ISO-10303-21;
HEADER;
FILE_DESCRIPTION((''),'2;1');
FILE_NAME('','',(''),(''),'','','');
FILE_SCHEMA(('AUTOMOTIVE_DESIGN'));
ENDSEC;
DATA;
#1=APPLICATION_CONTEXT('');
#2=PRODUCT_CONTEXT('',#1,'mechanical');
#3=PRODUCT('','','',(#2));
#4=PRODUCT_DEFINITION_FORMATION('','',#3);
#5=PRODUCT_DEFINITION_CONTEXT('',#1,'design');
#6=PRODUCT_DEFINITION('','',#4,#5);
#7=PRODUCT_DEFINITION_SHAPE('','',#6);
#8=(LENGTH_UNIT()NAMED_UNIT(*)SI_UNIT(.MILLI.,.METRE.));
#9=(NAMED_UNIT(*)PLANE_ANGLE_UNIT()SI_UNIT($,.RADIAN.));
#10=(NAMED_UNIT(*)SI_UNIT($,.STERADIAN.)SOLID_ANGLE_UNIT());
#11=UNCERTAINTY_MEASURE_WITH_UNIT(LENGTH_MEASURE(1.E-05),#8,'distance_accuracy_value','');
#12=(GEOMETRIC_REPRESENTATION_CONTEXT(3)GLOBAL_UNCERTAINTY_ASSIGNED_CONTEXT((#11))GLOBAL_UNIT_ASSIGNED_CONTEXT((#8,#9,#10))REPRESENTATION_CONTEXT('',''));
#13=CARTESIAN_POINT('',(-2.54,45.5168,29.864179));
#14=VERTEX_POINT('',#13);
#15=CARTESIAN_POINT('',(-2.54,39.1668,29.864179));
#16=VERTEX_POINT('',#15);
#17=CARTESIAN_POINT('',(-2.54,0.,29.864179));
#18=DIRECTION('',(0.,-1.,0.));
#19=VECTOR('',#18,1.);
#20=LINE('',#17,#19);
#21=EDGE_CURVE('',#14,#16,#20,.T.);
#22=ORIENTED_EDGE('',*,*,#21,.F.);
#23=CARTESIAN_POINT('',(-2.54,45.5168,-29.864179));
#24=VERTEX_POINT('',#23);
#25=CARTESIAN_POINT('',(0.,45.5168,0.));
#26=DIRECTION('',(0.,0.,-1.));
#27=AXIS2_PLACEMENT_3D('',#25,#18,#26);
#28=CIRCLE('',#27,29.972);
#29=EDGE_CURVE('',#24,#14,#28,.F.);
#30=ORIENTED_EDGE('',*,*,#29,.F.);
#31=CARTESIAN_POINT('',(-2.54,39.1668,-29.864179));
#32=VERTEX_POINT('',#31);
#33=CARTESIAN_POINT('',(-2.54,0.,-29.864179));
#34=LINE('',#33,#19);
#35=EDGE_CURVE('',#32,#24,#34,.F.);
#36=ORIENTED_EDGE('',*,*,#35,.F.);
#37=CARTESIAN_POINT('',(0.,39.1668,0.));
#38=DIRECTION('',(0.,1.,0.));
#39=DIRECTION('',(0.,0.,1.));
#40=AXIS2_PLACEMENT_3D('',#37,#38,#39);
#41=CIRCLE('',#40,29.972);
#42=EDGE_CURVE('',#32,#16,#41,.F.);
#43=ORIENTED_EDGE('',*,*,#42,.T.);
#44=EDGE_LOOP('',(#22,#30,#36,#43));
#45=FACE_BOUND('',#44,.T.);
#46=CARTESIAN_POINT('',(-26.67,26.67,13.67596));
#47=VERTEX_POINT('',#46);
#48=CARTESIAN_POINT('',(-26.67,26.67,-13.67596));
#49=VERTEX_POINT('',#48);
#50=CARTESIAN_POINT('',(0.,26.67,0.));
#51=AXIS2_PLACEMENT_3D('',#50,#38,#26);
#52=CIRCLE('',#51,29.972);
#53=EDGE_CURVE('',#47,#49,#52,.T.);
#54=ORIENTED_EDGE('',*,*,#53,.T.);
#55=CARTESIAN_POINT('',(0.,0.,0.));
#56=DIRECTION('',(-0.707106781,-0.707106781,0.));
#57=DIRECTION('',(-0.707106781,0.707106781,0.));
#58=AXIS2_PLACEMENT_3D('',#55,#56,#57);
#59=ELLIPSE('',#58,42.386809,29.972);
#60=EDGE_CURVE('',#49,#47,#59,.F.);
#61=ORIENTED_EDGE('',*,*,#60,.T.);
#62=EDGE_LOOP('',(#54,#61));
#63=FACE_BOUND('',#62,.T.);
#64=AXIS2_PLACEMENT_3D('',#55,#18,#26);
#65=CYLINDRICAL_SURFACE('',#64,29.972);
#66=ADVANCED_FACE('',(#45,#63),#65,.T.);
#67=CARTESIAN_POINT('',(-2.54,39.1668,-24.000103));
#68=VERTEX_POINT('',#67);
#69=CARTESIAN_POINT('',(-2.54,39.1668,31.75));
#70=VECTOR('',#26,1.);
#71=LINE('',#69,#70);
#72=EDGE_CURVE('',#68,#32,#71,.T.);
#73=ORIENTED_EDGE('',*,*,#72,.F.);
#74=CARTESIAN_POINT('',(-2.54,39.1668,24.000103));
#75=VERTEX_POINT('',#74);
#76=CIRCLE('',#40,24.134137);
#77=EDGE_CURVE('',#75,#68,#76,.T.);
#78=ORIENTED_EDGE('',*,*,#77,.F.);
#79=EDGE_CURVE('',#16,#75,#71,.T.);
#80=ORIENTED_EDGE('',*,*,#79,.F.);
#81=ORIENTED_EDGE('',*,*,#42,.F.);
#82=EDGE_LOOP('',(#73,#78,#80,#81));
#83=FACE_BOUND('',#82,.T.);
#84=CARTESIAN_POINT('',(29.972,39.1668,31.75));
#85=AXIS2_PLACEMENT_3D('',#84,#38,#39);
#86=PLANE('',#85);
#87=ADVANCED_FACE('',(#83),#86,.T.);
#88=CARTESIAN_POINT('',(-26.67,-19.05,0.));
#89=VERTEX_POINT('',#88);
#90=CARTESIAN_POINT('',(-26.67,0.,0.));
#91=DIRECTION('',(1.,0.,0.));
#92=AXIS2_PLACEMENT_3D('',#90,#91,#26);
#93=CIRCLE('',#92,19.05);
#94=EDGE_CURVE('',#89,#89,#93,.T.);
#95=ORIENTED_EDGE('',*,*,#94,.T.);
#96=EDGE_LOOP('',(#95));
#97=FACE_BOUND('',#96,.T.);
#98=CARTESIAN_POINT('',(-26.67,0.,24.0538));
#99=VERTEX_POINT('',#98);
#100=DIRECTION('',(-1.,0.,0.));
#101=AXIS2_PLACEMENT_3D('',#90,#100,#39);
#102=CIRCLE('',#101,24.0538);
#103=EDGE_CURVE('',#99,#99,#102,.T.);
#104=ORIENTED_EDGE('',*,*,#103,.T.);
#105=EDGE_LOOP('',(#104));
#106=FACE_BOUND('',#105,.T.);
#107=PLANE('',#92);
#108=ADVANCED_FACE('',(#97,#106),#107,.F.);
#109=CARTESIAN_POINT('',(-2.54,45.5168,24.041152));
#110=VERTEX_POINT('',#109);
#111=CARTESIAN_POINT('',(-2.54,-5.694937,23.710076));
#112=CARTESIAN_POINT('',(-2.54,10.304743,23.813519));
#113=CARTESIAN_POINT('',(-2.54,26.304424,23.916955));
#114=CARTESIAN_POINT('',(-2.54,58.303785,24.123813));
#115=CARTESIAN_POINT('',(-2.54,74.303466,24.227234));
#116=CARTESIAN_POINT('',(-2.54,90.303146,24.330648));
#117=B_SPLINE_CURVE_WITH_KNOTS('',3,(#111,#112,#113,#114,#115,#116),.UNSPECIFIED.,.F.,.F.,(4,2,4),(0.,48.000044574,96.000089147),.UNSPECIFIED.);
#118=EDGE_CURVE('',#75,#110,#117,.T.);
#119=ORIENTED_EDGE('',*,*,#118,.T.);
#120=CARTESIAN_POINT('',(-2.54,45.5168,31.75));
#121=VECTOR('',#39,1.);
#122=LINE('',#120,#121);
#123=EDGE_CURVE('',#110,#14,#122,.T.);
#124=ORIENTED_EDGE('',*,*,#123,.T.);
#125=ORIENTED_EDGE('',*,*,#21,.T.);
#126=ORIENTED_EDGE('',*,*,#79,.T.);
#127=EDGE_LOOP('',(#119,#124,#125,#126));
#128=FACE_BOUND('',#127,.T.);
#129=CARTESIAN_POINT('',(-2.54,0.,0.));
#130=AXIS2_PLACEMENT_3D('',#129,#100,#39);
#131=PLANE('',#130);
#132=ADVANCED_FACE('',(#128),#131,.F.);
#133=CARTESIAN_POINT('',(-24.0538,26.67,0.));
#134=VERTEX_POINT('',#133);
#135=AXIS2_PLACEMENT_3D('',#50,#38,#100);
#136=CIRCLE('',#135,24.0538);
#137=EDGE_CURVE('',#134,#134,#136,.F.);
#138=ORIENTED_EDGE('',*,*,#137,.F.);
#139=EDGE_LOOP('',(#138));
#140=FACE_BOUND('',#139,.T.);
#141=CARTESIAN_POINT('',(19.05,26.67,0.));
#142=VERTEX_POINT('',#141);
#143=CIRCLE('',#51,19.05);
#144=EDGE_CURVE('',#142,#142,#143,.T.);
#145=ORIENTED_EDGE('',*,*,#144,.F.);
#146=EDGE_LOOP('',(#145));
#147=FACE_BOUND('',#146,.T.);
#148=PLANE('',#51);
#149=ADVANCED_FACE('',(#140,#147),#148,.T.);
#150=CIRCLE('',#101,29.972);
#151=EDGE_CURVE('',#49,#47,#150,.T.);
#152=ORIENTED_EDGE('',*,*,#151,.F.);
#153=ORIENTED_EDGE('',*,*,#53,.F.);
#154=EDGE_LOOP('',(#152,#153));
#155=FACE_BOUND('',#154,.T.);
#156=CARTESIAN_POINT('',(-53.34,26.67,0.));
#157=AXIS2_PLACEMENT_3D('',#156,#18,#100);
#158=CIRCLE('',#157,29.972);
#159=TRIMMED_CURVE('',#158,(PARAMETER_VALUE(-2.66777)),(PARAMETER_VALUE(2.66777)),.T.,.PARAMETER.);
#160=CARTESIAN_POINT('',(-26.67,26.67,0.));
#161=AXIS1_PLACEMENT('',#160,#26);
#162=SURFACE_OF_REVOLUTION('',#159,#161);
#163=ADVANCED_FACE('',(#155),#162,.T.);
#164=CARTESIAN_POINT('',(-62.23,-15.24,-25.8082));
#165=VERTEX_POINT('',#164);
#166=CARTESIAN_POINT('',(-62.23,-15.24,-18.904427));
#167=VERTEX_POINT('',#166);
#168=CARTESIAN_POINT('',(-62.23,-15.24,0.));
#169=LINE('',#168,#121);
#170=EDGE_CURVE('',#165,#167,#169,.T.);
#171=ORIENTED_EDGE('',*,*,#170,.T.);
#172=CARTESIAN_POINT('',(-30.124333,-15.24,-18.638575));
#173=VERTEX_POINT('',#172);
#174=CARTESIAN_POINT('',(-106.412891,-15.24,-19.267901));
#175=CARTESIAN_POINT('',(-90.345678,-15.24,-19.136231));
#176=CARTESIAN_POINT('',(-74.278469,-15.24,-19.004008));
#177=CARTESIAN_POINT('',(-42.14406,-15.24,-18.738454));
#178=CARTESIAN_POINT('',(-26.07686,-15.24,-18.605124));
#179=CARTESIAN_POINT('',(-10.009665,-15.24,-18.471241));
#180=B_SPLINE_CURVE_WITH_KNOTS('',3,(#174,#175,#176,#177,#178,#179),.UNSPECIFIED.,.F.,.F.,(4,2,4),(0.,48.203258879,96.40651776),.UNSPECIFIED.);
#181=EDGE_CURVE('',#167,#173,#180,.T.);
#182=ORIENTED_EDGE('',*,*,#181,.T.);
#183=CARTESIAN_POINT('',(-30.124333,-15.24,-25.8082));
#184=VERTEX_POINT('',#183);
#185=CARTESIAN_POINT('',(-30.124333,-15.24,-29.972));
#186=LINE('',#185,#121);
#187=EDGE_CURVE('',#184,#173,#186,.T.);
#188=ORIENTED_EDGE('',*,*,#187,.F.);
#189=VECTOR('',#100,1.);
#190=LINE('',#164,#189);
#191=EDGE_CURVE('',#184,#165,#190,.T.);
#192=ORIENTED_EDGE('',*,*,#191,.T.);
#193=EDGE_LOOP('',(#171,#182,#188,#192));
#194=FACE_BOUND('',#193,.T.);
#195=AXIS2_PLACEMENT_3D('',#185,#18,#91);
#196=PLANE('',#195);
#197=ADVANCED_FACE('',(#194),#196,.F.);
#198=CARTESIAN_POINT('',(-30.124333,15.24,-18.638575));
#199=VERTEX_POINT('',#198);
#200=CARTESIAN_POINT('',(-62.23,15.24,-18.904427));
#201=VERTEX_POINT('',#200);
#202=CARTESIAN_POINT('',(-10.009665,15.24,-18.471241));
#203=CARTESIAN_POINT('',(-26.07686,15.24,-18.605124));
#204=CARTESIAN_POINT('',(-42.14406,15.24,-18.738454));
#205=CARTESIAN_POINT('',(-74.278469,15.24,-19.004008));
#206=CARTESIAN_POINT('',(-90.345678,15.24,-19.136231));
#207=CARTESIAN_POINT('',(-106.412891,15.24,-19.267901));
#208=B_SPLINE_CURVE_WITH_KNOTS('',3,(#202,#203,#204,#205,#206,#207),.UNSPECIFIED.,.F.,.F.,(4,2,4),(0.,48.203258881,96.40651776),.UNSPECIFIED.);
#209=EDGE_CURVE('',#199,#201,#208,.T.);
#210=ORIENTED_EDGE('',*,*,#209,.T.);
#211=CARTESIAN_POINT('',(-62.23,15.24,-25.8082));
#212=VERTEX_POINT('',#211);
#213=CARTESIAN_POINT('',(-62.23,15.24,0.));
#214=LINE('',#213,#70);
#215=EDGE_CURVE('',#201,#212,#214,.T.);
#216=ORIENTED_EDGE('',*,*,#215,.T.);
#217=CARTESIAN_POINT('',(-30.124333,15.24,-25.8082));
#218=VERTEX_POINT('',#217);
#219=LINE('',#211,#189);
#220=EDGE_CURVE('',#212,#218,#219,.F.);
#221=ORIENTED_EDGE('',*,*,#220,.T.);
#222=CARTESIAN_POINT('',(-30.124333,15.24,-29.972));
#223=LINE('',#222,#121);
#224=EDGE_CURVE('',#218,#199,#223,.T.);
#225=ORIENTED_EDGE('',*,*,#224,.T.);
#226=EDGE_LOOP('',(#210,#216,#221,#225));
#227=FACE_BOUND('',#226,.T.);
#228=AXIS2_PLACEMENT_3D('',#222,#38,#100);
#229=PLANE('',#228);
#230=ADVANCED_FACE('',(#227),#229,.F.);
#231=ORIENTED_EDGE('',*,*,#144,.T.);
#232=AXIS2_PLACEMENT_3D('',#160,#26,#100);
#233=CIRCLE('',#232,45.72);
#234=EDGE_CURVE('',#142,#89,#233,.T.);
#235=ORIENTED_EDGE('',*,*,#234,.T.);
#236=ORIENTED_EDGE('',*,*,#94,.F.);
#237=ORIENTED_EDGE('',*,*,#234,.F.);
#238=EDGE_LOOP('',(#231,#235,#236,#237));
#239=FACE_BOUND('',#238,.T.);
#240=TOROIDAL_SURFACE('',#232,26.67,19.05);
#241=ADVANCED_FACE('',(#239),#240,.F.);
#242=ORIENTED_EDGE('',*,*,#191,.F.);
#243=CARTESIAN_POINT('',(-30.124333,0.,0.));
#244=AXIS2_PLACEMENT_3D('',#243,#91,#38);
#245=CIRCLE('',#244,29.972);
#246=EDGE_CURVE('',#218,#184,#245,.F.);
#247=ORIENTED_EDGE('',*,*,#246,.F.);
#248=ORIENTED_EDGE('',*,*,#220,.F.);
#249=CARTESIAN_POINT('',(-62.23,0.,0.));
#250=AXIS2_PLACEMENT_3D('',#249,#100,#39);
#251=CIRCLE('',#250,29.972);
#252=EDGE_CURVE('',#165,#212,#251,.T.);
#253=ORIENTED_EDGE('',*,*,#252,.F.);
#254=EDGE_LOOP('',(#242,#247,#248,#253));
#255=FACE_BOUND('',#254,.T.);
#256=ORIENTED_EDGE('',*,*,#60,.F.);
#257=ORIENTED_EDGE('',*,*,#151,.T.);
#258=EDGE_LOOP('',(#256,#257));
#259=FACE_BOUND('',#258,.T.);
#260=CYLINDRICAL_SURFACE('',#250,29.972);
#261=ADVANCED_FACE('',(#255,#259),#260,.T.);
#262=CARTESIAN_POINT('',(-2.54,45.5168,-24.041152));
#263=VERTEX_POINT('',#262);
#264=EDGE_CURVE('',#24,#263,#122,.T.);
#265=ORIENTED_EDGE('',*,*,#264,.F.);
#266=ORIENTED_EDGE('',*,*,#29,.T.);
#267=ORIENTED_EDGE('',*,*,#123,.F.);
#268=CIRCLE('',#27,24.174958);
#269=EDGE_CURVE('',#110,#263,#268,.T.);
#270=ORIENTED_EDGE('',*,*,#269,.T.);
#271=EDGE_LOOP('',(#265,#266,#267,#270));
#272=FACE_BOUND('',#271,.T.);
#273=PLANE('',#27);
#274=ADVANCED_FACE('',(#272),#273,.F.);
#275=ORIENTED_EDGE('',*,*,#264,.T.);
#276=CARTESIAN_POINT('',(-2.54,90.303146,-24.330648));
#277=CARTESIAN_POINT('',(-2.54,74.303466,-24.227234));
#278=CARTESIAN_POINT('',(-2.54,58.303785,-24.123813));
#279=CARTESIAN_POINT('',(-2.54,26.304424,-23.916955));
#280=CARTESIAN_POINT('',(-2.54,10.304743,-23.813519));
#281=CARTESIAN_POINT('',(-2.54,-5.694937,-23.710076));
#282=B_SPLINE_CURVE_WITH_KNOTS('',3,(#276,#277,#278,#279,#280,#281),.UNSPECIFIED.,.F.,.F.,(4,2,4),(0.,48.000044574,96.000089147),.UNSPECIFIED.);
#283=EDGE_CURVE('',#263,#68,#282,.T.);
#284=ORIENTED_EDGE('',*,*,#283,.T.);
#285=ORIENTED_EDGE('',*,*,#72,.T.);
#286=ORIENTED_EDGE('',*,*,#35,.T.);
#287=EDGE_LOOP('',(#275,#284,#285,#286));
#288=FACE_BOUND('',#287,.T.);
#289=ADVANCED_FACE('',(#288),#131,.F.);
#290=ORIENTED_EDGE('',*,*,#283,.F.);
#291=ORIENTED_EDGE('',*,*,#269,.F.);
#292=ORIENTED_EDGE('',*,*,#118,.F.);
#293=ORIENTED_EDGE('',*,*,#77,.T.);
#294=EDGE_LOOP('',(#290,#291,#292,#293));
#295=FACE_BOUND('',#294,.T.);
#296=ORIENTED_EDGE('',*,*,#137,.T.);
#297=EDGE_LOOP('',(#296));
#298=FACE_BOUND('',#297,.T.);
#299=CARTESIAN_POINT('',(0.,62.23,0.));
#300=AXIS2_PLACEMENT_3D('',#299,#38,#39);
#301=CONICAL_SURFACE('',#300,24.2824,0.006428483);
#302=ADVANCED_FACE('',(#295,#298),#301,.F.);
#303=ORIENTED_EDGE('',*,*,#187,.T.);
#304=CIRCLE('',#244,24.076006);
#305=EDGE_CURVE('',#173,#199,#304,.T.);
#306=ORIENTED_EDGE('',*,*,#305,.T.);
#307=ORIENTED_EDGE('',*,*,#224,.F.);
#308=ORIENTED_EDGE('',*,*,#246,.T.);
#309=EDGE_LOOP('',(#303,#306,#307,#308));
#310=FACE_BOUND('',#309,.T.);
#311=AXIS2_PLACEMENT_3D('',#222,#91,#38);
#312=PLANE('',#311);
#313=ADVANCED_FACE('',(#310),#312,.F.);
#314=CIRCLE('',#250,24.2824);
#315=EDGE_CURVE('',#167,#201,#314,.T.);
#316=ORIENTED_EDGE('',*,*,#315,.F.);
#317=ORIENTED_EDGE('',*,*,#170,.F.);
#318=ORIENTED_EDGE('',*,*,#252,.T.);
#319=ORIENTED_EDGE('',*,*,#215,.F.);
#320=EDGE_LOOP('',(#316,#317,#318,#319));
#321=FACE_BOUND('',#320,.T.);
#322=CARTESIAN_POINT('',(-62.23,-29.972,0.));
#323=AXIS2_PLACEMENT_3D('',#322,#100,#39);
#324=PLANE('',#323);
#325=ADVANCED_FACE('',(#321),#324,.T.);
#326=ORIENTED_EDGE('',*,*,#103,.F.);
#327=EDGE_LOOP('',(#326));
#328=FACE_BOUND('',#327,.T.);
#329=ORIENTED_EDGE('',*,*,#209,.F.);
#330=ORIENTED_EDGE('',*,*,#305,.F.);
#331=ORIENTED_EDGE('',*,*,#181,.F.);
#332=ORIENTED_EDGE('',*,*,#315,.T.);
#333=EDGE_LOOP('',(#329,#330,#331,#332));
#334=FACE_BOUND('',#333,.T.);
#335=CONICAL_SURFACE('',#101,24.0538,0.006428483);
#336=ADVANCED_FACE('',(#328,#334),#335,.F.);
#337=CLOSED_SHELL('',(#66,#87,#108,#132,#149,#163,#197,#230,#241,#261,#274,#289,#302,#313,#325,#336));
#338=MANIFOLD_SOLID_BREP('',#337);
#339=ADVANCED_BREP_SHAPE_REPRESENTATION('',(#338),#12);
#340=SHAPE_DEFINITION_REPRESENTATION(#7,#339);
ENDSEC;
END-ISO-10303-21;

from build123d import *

# Parameters (mm, degrees)
SKETCH3_R               = 29.972
SKETCH3_R_2             = 19.05
SKETCH6_W               = 49.478831
SKETCH6_H               = 30.48
CUT_EXTRUDE2_DEPTH      = 93.970246
CUT_EXTRUDE3_DEPTH      = 93.970246
CUT_EXTRUDE3_DEPTH_BACK = 2.54
SKETCH7_W               = 63.5
SKETCH7_H               = 6.35
SKETCH8_R               = 43.612232
CUT_EXTRUDE4_DEPTH      = 103.320343


with BuildPart() as part:
    # Sketch1 → Revolve1 (revolve)
    with BuildSketch(Plane.XY):
        Polygon((-62.23, -29.972), (-26.67, -29.972), (-26.67, -24.0538), (-62.23, -24.2824), align=None)
    revolve(axis=Axis((-62.23, 0, 0), (1, 0, 0)))


with BuildPart() as body_2:
    # Sketch2 → Revolve2 (revolve)
    with BuildSketch(Plane.XY):
        Polygon((24.2824, 62.23), (24.0538, 26.67), (29.972, 26.67), (29.972, 62.23), align=None)
    revolve(axis=Axis((0, 0, 0), (0, 1, 0)))


with BuildPart() as sweep1_tool:
    # Sweep1: sweep along a path in Sketch4
    with BuildLine(Plane.XY) as sweep1_path:
        ThreePointArc((-26.67, 0), (-7.811462, 7.811462), (0, 26.67))
    # Sketch3 → Sweep1 (sweep)
    with BuildSketch(Plane(origin=(-26.67, 0, 0), x_dir=(0, 0, -1), z_dir=(1, 0, 0))):
        Circle(SKETCH3_R)
        Circle(SKETCH3_R_2, mode=Mode.SUBTRACT)
    sweep(path=sweep1_path.line)


with BuildPart() as part_1:
    add(part.part)


with BuildPart() as part_2:
    # Sweep1: joined with sweep1_tool
    add(part_1.part.fuse(sweep1_tool.part, body_2.part, tol=0.00001))

    # Sketch6 → Cut-Extrude2 (cut, through all)
    with BuildSketch(Plane.XY):
        with Locations((-54.863748, 0)):
            Rectangle(SKETCH6_W, SKETCH6_H)
    extrude(amount=-CUT_EXTRUDE2_DEPTH, mode=Mode.SUBTRACT)

    # Sketch7 → Cut-Extrude3 (cut, two sides: drawn at the far end of the back side and taken through both)
    with BuildSketch(Plane(origin=(0, 0, 0), x_dir=(0, 0, -1), z_dir=(1, 0, 0)).offset(-CUT_EXTRUDE3_DEPTH_BACK)):
        with Locations((0, 42.3418)):
            Rectangle(SKETCH7_W, SKETCH7_H)
    extrude(amount=CUT_EXTRUDE3_DEPTH + CUT_EXTRUDE3_DEPTH_BACK, mode=Mode.SUBTRACT)

    # Sketch8 → Cut-Extrude4 (cut, through all)
    with BuildSketch(Plane.XZ.offset(-45.5168)):
        Circle(SKETCH8_R)
    extrude(amount=-CUT_EXTRUDE4_DEPTH, mode=Mode.SUBTRACT)


solid = part_2.part
